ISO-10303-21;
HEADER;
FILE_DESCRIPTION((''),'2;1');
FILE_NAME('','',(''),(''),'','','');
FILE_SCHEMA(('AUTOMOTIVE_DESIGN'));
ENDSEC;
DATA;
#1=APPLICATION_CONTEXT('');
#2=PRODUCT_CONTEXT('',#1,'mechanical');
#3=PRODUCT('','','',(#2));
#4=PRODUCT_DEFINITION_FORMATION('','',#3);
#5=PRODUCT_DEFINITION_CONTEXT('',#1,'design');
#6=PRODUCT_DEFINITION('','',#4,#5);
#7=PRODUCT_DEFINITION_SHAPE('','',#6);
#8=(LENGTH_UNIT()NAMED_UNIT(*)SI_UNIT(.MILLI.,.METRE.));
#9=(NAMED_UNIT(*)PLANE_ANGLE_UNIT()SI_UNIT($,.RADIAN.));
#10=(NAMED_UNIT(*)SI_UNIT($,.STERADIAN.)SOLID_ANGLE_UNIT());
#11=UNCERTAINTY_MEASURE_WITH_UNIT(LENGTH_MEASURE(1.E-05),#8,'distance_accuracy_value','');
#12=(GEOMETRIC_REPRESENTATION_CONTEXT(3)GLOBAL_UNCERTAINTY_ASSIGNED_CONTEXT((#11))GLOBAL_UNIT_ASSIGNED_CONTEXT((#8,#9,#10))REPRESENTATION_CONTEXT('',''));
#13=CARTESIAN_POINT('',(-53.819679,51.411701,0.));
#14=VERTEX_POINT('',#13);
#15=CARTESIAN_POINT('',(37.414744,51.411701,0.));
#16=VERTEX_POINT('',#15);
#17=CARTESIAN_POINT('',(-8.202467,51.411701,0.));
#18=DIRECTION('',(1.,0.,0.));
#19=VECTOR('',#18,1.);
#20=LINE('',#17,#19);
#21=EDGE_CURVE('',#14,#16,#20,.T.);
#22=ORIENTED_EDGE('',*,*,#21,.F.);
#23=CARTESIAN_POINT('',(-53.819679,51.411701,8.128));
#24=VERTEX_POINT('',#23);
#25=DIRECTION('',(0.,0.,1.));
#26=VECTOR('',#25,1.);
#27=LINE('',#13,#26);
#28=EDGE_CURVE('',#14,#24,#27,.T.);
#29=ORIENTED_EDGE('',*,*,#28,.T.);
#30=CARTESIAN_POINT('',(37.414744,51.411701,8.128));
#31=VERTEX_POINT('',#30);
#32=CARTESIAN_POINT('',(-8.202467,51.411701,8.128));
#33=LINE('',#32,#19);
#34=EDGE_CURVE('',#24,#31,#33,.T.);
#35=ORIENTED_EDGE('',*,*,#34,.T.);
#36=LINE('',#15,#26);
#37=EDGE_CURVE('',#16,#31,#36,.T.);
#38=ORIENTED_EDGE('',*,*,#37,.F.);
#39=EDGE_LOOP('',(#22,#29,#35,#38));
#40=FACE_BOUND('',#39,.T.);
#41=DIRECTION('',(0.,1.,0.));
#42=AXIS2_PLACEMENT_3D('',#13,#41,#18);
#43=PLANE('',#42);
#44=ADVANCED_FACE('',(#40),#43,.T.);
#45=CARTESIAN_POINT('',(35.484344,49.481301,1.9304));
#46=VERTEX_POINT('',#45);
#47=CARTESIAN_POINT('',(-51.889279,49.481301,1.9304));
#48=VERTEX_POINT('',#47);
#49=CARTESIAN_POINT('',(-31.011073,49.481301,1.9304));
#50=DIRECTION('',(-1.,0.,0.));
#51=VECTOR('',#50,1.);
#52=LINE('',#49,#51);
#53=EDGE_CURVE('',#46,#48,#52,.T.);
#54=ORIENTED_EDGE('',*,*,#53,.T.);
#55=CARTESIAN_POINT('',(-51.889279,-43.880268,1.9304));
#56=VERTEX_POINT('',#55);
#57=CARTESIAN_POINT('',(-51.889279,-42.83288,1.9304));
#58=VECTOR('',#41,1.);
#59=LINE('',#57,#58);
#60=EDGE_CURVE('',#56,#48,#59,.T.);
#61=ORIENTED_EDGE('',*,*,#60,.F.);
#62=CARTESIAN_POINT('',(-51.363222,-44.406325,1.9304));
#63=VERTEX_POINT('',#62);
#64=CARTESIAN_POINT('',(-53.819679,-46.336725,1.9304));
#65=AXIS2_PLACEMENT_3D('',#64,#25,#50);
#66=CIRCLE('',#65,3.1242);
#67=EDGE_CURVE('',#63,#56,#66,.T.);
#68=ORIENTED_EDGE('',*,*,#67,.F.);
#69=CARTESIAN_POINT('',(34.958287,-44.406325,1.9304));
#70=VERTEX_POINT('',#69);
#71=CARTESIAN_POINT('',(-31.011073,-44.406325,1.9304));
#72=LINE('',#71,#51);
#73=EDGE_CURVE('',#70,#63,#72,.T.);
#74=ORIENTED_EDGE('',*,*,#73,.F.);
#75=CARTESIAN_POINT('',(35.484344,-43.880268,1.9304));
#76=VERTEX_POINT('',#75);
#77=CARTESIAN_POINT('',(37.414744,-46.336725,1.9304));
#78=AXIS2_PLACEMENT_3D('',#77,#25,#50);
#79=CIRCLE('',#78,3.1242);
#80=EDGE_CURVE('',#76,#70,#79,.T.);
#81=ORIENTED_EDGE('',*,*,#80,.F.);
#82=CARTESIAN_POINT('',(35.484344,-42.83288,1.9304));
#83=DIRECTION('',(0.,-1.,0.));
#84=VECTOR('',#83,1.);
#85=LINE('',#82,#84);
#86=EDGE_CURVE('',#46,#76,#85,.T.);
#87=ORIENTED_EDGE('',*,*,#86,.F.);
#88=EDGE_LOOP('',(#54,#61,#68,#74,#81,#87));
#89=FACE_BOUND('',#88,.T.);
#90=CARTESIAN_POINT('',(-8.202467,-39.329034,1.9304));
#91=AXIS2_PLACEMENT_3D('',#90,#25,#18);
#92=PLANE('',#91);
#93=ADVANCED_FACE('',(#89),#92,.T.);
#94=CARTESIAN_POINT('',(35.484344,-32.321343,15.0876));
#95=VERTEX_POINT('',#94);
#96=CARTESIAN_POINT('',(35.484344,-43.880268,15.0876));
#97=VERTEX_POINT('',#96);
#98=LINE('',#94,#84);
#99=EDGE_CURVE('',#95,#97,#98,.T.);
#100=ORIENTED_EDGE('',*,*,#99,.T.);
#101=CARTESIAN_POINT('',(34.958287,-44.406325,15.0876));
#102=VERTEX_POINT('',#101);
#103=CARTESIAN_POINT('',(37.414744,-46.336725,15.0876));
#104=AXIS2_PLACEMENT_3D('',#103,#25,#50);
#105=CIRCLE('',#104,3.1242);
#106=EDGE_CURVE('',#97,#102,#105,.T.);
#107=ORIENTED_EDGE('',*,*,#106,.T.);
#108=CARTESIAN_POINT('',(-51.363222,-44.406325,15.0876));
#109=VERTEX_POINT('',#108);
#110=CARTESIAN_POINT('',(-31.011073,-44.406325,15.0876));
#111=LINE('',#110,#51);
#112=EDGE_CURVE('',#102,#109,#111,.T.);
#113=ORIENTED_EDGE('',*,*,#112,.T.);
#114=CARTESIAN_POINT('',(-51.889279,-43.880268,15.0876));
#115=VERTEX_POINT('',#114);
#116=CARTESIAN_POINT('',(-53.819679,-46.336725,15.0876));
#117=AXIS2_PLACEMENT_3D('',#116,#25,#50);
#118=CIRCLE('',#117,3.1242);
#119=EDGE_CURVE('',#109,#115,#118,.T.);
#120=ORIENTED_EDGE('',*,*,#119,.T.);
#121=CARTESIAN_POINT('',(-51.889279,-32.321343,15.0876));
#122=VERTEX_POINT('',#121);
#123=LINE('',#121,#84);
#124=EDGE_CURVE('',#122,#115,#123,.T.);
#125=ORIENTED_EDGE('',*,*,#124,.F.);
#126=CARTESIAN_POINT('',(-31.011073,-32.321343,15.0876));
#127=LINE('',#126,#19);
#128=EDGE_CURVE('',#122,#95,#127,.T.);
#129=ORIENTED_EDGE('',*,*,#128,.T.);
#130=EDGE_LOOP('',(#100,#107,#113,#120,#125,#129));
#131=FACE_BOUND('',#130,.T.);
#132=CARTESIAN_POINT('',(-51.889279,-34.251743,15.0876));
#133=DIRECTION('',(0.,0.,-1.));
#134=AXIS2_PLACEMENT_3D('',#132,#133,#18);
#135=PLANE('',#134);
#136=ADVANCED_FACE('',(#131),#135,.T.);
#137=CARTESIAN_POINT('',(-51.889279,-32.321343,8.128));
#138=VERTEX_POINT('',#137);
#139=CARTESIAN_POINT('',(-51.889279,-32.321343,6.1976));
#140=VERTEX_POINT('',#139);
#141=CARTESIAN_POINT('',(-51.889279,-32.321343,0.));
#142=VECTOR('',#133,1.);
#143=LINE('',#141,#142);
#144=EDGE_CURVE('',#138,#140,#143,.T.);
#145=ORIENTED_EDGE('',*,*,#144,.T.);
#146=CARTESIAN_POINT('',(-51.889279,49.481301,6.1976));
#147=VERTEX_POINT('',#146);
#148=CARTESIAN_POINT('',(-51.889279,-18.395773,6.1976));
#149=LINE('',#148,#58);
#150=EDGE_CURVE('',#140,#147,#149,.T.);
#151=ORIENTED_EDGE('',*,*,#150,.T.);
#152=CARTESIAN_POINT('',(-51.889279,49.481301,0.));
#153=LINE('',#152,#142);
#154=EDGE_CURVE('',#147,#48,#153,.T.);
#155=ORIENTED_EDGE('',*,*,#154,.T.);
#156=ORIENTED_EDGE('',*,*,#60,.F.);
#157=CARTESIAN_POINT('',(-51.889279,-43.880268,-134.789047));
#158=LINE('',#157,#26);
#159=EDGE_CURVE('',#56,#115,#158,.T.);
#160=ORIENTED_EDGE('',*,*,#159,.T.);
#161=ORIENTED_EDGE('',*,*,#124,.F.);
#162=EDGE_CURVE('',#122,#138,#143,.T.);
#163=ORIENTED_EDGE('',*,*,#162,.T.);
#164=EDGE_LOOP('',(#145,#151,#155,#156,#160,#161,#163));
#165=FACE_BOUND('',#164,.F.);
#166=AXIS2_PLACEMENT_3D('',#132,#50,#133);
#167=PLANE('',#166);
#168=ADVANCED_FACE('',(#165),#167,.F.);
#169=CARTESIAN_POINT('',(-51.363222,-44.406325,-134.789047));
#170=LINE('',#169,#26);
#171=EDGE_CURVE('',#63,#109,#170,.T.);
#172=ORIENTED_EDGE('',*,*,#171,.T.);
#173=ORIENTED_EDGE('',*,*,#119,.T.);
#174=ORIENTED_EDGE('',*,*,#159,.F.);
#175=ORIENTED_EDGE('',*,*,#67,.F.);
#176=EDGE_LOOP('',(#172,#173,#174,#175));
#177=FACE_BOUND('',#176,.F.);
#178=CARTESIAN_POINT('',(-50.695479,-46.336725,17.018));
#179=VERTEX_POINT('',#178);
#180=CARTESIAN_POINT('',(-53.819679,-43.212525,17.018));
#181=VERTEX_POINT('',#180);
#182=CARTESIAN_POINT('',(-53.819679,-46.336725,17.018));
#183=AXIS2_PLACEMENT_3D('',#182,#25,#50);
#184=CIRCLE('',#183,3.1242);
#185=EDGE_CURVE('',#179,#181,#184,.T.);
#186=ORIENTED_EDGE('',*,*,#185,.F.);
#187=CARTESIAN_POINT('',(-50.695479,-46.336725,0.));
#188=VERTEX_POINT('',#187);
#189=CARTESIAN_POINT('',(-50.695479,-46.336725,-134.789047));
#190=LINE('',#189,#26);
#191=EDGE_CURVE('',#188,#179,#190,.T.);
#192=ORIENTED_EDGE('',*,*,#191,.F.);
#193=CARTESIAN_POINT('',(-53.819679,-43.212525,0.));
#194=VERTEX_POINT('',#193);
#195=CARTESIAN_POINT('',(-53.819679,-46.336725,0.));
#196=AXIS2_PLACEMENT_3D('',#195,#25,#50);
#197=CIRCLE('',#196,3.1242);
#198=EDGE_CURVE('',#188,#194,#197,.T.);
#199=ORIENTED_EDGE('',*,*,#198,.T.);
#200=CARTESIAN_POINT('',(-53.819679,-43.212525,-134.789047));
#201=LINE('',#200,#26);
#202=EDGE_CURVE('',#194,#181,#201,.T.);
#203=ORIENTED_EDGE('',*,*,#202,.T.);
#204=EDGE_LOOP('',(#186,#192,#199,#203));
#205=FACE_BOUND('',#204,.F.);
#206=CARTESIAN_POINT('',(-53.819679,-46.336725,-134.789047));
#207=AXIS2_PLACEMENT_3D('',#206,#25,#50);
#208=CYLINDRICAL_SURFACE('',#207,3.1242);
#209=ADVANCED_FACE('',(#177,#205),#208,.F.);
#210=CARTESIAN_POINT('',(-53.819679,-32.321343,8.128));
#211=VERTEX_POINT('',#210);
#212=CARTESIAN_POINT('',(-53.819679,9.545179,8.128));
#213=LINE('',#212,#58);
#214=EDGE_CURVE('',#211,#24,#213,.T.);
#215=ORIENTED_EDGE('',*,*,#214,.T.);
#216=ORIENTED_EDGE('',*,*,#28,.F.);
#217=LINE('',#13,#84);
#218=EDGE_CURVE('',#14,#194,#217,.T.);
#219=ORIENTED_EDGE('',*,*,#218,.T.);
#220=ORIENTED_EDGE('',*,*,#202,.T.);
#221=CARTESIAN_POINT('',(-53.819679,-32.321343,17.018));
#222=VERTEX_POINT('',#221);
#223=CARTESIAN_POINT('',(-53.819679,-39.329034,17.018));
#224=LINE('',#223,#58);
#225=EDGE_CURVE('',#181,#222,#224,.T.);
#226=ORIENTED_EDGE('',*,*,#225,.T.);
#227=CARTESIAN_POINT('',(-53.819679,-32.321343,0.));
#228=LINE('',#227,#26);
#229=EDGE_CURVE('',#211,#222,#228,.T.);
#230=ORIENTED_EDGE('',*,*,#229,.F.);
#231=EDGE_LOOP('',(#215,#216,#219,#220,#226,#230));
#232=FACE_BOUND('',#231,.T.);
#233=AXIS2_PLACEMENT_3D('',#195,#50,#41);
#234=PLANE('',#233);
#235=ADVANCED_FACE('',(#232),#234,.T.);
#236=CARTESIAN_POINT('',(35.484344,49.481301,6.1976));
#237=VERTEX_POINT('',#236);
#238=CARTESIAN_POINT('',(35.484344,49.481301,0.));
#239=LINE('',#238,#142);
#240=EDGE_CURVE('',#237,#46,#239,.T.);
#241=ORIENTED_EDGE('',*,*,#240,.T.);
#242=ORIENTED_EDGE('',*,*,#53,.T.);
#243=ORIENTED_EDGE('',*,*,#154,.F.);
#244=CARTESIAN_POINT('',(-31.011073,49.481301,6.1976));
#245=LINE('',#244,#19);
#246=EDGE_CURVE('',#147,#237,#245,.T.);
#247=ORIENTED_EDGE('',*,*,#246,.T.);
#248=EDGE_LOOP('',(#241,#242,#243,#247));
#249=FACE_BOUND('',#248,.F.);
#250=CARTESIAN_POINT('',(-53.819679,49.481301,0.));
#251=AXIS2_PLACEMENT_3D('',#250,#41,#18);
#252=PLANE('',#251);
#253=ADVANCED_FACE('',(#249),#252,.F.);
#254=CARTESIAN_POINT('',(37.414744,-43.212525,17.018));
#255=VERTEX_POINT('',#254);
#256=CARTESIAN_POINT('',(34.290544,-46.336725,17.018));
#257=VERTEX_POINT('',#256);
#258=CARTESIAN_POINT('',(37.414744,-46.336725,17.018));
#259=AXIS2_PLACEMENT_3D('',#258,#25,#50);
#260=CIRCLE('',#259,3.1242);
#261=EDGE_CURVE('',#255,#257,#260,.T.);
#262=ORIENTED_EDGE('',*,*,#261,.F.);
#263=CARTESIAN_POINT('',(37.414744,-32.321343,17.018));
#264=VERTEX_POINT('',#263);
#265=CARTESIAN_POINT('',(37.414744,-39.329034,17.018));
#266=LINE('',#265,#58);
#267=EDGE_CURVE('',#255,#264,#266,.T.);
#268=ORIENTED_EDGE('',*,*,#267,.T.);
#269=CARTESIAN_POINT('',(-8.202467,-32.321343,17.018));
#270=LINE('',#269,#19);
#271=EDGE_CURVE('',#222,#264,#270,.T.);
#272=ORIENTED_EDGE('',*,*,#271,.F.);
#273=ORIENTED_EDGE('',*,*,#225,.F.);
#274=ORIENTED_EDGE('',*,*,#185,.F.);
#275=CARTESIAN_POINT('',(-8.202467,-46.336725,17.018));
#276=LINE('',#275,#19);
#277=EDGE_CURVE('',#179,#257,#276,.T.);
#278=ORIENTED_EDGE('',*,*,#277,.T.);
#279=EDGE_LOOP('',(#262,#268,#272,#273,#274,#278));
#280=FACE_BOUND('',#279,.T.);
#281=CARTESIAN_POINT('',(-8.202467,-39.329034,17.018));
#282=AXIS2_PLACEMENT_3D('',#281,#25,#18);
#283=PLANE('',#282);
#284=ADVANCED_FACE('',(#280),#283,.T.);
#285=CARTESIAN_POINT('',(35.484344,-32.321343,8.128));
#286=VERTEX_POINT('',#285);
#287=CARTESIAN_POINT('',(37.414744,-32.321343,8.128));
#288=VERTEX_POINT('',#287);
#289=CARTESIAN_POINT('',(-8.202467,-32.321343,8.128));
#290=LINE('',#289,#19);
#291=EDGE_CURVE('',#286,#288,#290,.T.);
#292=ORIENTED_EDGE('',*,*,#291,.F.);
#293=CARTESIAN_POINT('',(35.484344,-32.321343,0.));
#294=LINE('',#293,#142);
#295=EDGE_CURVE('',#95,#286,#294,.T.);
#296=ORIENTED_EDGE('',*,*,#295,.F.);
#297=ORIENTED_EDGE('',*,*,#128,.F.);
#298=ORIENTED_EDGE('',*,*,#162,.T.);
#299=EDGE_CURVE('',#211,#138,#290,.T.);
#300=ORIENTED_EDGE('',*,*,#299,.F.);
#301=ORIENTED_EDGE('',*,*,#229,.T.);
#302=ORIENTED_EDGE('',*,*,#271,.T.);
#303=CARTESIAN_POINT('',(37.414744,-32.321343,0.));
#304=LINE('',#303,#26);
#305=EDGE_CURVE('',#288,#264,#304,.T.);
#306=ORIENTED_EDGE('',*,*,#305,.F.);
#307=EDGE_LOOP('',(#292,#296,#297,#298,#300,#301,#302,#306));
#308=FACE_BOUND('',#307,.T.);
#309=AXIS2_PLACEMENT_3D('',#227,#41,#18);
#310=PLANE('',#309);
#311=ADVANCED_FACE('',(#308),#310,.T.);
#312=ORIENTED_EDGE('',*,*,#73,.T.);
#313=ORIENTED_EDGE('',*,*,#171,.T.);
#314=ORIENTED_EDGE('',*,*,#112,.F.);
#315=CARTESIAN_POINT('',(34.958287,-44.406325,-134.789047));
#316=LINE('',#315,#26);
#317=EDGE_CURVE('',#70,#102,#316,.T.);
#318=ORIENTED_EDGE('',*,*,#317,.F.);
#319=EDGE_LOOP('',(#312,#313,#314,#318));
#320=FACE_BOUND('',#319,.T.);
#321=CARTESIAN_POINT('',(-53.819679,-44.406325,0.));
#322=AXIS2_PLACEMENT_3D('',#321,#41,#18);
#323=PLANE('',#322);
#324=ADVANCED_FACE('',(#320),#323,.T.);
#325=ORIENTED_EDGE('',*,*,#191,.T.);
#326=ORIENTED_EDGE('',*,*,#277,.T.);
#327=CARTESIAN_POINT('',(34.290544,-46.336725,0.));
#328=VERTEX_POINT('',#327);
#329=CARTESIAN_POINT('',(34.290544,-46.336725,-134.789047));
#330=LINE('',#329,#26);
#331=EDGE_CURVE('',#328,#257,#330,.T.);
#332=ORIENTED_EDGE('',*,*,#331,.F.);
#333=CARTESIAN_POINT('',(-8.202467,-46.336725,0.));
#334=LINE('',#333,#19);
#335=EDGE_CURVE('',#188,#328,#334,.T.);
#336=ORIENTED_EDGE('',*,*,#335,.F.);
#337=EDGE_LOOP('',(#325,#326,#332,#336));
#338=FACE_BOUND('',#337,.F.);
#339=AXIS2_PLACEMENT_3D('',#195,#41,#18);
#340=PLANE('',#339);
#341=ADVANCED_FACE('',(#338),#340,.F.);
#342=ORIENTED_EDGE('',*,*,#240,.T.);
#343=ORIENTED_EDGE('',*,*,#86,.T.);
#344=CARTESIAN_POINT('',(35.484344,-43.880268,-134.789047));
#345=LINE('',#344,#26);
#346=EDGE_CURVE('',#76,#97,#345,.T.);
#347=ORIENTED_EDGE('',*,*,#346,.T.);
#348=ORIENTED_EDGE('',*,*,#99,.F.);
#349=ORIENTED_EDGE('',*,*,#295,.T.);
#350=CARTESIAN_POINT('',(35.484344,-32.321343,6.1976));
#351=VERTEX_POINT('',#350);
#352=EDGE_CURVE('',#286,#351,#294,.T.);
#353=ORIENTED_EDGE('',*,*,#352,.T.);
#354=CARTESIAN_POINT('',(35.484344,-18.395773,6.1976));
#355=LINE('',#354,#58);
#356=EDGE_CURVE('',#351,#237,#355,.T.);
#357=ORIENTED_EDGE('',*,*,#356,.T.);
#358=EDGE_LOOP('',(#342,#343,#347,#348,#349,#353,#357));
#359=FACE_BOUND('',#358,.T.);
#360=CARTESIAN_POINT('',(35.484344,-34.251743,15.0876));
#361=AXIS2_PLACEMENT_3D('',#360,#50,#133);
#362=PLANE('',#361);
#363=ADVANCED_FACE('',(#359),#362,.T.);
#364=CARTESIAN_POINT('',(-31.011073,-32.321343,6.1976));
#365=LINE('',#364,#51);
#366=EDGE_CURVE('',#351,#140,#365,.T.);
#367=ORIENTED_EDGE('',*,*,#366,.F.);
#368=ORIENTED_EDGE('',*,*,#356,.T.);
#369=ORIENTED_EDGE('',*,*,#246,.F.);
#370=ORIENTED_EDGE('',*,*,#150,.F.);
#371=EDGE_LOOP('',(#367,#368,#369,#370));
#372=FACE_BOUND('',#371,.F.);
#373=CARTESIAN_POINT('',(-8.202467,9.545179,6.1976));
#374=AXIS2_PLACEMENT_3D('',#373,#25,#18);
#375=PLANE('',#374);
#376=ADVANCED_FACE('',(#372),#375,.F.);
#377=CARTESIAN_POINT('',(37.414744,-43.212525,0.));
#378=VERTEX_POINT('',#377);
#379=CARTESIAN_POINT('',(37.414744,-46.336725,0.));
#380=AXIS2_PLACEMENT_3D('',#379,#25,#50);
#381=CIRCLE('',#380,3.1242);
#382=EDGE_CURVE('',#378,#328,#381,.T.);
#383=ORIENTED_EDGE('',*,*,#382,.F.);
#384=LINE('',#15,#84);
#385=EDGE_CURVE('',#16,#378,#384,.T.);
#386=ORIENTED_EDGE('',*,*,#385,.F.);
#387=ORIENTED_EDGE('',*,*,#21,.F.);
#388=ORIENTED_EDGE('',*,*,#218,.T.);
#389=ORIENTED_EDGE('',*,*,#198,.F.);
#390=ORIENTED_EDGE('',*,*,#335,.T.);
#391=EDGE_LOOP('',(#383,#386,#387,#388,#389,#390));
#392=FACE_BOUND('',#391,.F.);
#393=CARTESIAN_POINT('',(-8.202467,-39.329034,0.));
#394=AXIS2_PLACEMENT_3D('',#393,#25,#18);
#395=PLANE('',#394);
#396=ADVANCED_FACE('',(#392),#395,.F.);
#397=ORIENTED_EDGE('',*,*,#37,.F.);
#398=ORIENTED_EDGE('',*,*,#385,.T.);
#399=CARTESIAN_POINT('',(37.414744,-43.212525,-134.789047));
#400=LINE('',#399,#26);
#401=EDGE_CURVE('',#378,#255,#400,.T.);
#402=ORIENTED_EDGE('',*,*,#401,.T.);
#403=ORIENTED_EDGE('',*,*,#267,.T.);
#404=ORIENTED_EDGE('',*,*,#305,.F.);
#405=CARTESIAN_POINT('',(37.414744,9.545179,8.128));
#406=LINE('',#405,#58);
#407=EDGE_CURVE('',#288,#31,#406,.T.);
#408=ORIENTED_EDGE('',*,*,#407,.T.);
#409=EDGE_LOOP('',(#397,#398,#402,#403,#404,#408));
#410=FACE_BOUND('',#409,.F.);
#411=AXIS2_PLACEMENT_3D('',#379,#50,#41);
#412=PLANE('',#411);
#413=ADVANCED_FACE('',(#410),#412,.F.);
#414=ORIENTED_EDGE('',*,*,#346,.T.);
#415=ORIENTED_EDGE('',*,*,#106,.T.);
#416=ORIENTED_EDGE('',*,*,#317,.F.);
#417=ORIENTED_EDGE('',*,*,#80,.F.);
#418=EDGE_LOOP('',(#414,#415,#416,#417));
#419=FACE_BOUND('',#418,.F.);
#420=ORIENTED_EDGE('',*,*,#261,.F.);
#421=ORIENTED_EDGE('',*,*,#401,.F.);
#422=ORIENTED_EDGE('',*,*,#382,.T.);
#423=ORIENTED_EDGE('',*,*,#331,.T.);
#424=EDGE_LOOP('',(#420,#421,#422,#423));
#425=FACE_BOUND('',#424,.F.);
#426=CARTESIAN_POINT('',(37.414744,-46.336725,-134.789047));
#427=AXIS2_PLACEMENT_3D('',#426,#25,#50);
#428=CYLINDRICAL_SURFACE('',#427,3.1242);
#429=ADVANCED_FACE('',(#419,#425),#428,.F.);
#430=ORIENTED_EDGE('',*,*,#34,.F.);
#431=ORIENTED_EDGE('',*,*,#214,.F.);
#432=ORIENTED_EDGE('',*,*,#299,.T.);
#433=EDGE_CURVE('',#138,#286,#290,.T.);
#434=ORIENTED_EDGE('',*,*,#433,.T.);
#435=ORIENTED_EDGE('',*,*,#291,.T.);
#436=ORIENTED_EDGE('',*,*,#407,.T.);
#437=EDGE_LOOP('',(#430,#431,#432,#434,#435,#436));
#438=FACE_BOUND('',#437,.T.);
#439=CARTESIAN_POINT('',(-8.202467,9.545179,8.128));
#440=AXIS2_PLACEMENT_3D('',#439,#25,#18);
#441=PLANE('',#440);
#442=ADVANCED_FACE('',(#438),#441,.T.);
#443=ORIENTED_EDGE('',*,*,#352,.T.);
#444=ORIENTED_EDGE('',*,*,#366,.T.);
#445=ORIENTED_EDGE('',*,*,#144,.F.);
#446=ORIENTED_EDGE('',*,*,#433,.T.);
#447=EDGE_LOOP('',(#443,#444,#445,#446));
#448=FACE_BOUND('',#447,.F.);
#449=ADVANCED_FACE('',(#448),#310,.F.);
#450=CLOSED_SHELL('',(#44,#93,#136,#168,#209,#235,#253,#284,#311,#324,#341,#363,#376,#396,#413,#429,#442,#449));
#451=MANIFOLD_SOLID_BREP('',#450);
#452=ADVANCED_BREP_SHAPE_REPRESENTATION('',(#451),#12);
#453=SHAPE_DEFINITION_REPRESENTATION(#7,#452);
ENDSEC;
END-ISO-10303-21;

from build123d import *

# Parameters (mm, degrees)
F0_W     = 91.2344232202
F0_H     = 83.7330448863
F1_DEPTH = 8.128
F0_H_2   = 14.015381963
F2_DEPTH = 17.018
F3_T     = -1.9304
F4_D     = 6.2484


# Not quite as in the source:
# - a shell that OpenCascade refuses in one call is made with other operations: the cavity is built on its own and cut out


with BuildPart() as f1:
    # F0 (on Top) → F1 (new body)
    with BuildSketch(Plane.XY):
        with Locations((-8.2024671137, 9.545179052)):
            Rectangle(F0_W, F0_H)
    extrude(amount=F1_DEPTH)

    # F0 (on Top) → F2 (join)
    with BuildSketch(Plane.XY):
        with Locations((-8.2024671137, -39.3290343727)):
            Rectangle(F0_W, F0_H_2)
    extrude(amount=F2_DEPTH)

    # F3: a shell. OpenCascade refuses it in one call, so the cavity is built on its own and cut out:
    # the body offset inwards by the wall thickness, plus a prism from it out through each open face.
    f3_core = offset(f1.part, amount=F3_T, kind=Kind.INTERSECTION, mode=Mode.PRIVATE)
    f3_exits = [f3_core.faces().sort_by_distance(p)[0] for p in [
        (-8.202467, -34.251743, 10.6426),
    ]]
    add(f3_core, mode=Mode.SUBTRACT)
    extrude(f3_exits, amount=-F3_T, mode=Mode.SUBTRACT)

    # F4 (through all)
    with Locations(Plane(origin=(0, 0, 0), x_dir=(1, 0, 0), z_dir=(0, 0, -1))):
        with Locations((37.4147444963, 46.3367253542), (-53.8196787238, 46.3367253542)):
            Hole(F4_D / 2)


solid = f1.part
